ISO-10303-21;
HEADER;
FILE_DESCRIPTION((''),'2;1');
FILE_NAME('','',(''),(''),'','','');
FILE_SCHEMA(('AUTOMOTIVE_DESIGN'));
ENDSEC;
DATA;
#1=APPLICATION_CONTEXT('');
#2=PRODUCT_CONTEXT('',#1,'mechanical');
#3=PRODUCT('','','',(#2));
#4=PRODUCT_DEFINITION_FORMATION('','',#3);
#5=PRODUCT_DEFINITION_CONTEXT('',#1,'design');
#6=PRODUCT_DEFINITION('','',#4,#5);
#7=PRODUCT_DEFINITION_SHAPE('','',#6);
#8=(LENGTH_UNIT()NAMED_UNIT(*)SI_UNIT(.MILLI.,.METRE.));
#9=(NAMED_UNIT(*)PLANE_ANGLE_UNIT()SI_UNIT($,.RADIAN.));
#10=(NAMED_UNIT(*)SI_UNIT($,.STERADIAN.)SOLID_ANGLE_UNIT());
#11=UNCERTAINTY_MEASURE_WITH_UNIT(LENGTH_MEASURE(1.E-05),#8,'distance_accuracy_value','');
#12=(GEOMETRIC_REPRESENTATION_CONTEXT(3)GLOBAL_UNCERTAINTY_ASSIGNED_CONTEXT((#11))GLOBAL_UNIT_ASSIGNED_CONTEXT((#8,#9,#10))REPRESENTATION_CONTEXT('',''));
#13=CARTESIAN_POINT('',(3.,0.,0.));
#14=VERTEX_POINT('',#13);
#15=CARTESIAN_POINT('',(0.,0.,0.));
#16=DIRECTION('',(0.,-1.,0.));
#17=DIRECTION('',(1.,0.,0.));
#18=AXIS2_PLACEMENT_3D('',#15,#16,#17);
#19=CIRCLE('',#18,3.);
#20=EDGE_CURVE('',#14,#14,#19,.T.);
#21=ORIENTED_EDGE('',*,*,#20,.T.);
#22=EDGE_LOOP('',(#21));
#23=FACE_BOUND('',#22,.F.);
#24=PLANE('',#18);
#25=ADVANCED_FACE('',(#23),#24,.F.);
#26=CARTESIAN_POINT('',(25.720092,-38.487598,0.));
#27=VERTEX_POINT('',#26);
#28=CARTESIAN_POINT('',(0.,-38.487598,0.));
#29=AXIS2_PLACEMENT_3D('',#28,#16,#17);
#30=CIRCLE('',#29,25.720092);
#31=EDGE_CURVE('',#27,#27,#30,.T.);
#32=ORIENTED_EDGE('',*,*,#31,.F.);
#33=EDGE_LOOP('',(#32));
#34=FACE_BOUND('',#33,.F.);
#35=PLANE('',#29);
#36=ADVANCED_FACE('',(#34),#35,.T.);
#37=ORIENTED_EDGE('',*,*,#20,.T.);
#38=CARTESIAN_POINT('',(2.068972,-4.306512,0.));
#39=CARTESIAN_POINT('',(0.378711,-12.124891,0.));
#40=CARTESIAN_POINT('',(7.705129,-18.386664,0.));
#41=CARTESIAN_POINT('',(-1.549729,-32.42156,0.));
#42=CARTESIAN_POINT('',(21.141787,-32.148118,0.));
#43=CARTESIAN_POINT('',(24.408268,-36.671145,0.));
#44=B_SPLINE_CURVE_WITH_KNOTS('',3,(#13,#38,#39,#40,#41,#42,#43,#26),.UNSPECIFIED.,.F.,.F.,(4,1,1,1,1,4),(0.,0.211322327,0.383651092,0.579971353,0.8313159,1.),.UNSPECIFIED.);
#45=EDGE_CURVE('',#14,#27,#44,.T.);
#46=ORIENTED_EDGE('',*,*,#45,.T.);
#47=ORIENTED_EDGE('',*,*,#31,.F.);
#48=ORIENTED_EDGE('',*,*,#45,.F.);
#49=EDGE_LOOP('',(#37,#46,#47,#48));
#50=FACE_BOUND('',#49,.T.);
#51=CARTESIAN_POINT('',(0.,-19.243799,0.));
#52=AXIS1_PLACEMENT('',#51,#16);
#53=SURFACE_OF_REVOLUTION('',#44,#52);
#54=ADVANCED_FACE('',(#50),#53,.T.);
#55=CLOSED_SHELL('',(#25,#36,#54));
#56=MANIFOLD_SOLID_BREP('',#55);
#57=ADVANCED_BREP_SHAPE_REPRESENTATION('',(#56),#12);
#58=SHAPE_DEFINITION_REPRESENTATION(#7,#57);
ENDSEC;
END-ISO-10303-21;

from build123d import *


# Not quite as in the source:
# - a feature of the source that left no trace in its solid (it failed there, or was rolled back) is left out


with BuildPart() as f5:
    # F4 (on Top) → F5 (revolve)
    with BuildSketch(Plane.XY):
        with BuildLine():
            Line((3, 0), (0, 0))
            Line((0, 0), (0, -38.4875983))
            Line((0, -38.4875983), (25.7200915366, -38.4875983))
            add(Edge.make_bspline(
                [(3, 0), (2.0689721237, -4.3065120364), (0.3787112512, -12.1248910313), (7.705129325, -18.3866637047), (-1.5497286946, -32.4215600183), (21.141787172, -32.1481184701), (24.4082681465, -36.6711445957), (25.7200915366, -38.4875983)],
                knots=[0, 0, 0, 0, 0.2113223272, 0.3836510917, 0.5799713529, 0.8313158999, 1, 1, 1, 1], degree=3))
        make_face()
    revolve(axis=Axis((0, -19.24379915, 0), (0, -1, 0)))


solid = f5.part
